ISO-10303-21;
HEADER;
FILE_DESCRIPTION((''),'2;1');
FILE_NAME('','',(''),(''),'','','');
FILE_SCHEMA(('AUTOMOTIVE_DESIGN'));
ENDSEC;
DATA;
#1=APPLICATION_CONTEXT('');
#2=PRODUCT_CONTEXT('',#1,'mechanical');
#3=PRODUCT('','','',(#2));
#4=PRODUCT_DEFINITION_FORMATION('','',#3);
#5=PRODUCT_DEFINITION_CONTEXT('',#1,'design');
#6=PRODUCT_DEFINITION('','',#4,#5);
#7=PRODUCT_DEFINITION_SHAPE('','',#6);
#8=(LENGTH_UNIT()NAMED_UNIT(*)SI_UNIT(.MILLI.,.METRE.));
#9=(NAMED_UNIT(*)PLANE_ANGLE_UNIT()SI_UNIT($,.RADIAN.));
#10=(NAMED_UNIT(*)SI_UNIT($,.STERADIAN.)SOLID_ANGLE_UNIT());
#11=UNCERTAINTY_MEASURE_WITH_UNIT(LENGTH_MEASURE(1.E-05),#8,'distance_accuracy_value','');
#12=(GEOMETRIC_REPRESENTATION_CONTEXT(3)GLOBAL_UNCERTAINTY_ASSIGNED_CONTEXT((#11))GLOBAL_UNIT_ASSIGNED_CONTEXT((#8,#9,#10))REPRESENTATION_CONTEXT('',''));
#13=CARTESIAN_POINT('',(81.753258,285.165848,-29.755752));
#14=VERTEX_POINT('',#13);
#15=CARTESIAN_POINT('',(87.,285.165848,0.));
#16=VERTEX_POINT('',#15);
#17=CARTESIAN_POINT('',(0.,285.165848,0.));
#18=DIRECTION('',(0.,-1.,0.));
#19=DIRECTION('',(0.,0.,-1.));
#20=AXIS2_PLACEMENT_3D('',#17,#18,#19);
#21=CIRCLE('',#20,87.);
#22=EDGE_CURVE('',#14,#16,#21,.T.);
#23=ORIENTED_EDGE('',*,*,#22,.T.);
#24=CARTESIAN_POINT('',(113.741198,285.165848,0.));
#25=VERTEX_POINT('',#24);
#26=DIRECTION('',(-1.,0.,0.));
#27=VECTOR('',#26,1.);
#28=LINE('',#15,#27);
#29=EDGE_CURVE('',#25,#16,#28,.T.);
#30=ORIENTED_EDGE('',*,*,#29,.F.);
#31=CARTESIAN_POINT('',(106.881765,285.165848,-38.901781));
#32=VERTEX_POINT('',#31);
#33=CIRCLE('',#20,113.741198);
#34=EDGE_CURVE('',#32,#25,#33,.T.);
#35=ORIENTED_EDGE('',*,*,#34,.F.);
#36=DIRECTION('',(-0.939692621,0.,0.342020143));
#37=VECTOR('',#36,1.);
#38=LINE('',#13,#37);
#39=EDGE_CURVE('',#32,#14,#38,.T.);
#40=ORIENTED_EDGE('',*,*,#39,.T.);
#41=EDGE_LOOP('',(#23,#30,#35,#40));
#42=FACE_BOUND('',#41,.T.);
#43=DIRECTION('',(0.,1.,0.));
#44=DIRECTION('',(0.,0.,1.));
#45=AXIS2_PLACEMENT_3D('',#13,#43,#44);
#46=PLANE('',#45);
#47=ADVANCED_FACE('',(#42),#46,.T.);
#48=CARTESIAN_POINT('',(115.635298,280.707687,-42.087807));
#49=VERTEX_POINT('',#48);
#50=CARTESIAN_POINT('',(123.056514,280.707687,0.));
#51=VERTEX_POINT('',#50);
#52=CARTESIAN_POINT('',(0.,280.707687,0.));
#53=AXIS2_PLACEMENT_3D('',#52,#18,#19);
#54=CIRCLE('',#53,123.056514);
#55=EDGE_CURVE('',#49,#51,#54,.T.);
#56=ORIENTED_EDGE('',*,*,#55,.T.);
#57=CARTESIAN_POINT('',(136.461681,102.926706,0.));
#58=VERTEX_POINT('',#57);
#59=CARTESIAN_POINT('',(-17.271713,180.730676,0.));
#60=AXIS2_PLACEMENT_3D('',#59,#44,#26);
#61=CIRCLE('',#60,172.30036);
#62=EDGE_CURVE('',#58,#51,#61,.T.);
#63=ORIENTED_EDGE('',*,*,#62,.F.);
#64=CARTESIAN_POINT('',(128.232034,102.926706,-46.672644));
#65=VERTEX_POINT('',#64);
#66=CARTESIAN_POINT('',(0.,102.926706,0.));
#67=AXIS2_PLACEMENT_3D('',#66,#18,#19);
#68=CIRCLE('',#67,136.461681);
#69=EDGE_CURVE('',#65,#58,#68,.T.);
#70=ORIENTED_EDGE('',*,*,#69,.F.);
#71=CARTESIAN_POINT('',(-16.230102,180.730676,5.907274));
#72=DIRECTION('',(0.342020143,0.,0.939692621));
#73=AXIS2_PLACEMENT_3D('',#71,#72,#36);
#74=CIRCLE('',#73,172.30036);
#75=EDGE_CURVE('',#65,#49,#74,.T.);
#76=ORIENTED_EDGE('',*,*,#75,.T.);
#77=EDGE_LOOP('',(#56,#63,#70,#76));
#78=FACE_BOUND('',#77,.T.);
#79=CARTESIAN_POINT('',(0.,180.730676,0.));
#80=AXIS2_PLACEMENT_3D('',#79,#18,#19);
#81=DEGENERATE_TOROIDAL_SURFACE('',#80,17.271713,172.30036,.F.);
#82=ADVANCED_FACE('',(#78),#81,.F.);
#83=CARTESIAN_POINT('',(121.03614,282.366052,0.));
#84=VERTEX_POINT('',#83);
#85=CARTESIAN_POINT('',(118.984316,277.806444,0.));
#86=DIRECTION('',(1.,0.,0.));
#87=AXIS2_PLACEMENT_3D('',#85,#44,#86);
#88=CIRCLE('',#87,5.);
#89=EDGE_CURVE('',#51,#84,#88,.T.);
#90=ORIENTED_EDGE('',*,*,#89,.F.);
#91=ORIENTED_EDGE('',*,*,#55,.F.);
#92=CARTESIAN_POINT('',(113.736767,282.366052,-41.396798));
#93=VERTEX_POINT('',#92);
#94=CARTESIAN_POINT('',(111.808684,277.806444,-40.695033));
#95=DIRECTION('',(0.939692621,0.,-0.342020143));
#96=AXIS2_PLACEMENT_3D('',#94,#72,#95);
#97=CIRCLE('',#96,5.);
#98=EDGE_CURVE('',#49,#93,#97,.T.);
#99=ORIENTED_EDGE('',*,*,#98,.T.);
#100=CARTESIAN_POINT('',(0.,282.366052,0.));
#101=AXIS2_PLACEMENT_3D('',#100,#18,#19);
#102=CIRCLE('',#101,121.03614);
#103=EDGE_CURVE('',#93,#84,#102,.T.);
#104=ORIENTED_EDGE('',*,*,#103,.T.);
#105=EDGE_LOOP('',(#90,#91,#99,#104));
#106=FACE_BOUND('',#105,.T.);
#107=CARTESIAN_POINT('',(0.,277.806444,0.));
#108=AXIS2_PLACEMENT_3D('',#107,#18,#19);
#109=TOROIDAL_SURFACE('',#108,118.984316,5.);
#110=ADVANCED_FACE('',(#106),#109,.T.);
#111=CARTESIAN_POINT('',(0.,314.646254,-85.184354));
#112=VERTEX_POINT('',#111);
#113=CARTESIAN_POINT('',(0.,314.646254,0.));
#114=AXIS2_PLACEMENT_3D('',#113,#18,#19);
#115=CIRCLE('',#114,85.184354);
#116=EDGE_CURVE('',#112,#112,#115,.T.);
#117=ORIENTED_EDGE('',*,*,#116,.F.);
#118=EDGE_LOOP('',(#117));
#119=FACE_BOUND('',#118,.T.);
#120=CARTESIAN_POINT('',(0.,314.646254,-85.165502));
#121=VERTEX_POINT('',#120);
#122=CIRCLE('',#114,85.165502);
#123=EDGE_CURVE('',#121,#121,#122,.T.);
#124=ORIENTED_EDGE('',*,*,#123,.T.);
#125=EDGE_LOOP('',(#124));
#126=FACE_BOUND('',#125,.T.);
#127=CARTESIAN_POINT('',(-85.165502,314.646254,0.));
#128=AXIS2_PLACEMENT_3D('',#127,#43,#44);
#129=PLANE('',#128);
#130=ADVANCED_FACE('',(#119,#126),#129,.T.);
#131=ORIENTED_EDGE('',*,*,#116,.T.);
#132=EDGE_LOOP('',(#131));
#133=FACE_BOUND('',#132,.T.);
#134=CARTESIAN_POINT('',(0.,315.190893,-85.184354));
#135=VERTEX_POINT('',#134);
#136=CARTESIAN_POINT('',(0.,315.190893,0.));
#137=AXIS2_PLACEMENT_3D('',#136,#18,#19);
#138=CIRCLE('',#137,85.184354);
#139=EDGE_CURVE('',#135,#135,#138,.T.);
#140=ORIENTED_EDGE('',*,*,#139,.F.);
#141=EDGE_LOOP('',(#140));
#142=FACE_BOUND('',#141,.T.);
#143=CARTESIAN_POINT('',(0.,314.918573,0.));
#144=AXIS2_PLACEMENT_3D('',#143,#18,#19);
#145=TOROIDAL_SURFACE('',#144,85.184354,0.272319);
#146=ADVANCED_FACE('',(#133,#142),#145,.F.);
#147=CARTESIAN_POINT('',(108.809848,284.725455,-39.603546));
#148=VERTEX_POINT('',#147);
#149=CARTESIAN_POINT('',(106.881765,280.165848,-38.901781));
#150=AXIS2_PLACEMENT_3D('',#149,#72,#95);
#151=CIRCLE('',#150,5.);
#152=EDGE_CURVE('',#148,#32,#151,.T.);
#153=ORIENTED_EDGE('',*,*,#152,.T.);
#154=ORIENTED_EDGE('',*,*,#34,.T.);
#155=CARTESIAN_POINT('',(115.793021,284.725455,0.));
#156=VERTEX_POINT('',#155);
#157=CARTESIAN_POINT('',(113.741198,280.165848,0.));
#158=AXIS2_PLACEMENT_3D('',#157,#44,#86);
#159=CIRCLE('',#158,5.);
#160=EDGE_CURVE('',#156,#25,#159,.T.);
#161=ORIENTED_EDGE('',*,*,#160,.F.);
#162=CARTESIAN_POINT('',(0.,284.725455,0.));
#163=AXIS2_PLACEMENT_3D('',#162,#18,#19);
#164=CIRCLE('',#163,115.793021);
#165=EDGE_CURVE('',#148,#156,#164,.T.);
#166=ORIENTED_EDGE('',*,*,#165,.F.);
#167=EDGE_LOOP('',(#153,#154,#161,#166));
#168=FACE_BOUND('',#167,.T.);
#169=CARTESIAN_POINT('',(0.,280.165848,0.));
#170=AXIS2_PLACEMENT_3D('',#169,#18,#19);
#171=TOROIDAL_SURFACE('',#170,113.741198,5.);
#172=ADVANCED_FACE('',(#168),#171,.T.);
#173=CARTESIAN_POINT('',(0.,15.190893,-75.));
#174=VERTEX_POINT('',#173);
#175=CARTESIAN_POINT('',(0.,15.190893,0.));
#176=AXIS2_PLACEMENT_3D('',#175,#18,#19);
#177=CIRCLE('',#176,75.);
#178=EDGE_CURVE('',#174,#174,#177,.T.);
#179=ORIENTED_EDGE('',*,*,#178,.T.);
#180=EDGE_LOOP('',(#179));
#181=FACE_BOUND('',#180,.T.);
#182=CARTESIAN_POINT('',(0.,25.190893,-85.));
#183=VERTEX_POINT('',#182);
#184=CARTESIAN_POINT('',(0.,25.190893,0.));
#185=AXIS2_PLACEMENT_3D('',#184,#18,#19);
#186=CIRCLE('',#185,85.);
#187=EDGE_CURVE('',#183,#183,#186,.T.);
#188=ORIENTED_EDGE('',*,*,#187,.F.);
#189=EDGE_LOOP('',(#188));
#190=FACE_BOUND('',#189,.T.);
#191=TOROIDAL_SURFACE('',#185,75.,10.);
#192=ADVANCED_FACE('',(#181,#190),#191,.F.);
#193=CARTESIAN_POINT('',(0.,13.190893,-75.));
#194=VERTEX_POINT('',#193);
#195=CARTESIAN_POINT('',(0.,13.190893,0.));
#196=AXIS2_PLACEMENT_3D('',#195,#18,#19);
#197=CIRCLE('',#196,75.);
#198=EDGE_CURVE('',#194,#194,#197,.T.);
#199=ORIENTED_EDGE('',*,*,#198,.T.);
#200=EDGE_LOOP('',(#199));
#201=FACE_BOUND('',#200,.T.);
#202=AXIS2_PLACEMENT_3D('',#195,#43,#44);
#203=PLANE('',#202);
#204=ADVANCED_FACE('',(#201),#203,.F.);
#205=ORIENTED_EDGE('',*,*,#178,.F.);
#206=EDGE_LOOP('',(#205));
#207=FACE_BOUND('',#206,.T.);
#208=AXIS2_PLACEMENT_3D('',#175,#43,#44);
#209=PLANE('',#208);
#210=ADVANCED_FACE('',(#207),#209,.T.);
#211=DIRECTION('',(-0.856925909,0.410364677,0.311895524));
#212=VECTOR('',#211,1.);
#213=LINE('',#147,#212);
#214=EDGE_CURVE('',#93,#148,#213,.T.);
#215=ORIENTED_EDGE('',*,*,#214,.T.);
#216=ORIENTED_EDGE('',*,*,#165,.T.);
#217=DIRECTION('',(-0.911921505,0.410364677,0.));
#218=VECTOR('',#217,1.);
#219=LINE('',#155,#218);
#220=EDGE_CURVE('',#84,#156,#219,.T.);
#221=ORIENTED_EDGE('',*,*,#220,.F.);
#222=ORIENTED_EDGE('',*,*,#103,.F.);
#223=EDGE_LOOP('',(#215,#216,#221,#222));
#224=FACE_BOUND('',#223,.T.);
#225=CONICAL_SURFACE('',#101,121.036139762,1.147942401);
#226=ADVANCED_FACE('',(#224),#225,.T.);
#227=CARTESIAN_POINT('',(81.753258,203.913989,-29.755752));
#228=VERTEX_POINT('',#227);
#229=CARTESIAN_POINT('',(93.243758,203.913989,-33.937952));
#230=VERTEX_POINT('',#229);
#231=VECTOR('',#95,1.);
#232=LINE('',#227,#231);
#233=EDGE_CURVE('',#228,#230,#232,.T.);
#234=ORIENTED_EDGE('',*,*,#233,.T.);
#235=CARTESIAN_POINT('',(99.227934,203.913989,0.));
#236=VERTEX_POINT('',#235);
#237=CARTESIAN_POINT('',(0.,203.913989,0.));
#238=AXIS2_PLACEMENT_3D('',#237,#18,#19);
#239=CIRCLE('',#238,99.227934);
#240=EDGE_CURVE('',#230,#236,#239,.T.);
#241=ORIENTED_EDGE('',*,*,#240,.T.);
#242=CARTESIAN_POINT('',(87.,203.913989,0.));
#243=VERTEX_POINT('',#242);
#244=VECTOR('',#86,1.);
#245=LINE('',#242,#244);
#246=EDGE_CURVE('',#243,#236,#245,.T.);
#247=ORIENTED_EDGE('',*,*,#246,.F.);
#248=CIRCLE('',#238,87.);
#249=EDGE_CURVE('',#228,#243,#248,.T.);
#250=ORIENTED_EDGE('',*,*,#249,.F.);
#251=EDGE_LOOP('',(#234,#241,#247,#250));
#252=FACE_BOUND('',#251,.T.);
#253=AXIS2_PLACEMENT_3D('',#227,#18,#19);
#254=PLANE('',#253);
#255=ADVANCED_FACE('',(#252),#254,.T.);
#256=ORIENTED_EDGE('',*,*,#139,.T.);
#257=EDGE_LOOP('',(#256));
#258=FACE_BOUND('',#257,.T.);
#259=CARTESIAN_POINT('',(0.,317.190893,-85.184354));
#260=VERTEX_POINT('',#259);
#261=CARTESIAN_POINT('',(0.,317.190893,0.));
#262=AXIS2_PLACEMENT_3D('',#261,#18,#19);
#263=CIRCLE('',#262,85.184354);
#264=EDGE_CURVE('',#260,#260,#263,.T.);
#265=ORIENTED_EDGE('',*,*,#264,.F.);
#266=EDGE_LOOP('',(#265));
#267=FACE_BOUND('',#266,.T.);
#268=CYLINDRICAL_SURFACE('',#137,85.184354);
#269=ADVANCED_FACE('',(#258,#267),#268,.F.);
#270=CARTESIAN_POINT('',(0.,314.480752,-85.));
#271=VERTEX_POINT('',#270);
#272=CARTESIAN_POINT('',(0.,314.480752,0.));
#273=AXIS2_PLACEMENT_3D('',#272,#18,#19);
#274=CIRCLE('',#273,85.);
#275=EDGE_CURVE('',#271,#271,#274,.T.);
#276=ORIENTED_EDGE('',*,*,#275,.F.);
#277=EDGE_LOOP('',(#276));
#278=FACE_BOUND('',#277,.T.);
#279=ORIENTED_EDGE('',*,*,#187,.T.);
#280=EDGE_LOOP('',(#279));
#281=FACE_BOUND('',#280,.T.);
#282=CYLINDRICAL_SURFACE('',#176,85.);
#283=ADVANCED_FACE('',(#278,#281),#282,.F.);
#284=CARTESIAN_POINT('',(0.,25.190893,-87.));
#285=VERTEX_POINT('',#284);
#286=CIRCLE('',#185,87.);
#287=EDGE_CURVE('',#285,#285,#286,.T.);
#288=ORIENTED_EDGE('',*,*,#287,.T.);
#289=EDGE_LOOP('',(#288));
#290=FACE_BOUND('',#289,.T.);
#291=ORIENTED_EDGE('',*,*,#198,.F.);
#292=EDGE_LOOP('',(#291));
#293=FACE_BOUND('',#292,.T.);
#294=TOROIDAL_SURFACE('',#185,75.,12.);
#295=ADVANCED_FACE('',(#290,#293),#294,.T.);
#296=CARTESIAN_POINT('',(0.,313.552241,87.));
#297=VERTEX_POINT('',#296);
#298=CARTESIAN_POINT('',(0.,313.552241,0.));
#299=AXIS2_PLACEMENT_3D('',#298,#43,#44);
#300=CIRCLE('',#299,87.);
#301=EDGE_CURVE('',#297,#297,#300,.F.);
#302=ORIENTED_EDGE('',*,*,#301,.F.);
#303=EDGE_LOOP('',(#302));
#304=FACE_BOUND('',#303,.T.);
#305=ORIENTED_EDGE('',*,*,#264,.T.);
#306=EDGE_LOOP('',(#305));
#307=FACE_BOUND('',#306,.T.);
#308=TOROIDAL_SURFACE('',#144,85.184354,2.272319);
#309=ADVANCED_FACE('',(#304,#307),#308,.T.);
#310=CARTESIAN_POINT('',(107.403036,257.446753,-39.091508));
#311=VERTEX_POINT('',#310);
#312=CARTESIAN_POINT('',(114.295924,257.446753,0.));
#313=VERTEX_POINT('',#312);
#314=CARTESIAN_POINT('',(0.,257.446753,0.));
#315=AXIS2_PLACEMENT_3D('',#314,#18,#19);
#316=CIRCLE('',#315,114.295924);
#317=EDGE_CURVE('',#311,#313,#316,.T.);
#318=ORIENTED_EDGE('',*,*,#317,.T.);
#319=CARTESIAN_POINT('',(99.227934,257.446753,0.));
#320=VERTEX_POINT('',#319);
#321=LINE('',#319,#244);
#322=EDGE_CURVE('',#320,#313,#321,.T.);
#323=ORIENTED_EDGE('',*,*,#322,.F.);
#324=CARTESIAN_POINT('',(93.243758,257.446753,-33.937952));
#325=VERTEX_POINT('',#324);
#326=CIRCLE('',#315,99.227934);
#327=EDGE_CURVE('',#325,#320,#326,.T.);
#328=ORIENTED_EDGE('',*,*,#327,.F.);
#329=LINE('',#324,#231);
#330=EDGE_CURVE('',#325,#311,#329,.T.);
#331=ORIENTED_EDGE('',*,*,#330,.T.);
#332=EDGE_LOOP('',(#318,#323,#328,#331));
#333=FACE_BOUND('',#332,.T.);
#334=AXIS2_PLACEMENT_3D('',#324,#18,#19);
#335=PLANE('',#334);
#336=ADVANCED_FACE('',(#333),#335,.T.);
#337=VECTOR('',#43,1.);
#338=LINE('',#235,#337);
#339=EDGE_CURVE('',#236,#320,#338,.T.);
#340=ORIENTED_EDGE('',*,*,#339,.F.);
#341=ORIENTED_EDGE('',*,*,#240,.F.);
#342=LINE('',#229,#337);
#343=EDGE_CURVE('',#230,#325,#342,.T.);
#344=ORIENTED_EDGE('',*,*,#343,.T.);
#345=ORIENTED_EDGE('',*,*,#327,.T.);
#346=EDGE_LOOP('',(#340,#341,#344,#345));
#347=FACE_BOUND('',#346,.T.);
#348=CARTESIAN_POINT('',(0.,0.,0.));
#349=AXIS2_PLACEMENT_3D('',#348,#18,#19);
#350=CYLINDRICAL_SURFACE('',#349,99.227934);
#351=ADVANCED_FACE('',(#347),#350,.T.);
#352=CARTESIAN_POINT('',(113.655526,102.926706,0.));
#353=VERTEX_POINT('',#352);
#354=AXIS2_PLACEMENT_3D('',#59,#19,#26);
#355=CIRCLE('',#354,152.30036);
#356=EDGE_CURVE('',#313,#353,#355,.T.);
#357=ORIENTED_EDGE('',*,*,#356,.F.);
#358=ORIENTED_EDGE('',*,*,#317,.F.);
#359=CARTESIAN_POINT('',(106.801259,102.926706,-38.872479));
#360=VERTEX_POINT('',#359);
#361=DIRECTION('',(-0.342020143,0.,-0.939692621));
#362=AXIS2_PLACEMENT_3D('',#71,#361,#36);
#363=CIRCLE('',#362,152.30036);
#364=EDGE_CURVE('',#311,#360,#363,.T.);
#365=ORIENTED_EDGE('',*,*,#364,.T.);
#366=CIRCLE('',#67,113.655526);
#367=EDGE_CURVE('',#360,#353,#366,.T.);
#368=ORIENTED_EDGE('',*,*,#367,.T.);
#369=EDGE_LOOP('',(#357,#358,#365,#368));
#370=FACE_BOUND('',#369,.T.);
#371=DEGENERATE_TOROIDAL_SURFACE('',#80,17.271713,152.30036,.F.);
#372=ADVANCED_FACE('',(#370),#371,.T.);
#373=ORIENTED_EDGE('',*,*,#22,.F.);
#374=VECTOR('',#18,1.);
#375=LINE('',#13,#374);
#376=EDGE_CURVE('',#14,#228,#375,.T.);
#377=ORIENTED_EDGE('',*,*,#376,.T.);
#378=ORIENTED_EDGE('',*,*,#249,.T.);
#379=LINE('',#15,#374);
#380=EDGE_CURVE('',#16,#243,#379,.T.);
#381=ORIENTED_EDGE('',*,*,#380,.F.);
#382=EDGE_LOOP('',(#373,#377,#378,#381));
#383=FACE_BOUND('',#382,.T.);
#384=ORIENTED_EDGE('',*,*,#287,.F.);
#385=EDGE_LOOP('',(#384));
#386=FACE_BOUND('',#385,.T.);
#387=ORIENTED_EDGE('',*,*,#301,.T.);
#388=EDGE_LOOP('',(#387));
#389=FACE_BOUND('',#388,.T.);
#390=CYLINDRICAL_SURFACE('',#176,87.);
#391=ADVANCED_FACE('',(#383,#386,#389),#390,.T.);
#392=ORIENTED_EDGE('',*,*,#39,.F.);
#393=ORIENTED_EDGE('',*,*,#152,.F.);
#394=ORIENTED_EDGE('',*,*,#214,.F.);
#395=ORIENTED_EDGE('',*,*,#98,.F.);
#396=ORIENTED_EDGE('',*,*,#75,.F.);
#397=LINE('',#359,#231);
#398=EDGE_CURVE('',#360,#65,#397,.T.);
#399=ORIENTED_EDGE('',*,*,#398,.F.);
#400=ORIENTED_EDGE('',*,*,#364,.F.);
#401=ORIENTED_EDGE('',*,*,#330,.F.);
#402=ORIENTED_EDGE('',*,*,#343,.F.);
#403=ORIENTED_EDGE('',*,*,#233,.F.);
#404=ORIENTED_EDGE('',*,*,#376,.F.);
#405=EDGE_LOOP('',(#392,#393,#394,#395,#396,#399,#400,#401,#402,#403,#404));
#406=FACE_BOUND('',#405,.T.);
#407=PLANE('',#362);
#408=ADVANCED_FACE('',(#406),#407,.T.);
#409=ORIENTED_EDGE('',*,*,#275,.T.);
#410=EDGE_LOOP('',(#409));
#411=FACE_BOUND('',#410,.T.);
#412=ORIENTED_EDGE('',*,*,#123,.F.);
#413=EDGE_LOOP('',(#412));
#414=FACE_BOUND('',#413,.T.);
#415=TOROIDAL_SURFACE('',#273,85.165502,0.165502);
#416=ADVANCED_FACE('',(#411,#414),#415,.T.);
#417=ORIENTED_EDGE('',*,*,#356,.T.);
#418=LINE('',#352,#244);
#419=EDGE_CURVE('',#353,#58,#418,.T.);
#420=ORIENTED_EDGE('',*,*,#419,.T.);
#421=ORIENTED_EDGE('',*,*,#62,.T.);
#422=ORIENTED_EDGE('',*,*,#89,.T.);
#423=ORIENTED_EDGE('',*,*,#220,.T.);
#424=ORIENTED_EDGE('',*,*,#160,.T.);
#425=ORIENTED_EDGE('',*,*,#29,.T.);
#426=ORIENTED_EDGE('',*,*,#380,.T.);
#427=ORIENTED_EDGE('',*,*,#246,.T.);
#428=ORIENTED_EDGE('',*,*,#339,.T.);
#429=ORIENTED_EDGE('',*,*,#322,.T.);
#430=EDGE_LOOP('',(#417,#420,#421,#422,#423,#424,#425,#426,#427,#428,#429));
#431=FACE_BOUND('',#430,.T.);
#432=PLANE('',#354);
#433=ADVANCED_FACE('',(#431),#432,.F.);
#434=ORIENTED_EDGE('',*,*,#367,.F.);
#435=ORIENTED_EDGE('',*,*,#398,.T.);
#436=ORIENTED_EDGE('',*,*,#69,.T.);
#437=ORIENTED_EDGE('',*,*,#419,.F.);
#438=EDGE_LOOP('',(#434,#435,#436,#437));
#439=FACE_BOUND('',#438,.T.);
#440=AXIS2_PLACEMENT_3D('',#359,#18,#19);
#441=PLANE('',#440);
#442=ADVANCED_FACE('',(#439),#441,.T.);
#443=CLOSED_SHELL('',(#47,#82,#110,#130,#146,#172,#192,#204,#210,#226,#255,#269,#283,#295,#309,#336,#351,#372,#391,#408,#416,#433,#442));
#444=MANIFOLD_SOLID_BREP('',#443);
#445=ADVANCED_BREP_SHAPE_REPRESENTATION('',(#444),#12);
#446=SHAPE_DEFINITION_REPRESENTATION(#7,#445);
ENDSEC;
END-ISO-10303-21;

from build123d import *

# Parameters (mm, degrees)
REVOLVE2_ANGLE = 20


with BuildPart() as part:
    # Sketch1 → Revolve1 (revolve)
    with BuildSketch(Plane.XY, mode=Mode.PRIVATE) as revolve1_sk:
        with BuildLine():
            Line((0, 15.190892732), (-75, 15.190892732))
            ThreePointArc((-75, 15.190892732), (-82.071067812, 18.11982492), (-85, 25.190892732))
            Line((-85, 25.190892732), (-85, 314.480751979))
            ThreePointArc((-85, 314.480751979), (-85.048474494, 314.597779759), (-85.165502274, 314.646254252))
            Line((-85.165502274, 314.646254252), (-85.184354085, 314.646254252))
            ThreePointArc((-85.184354085, 314.646254252), (-85.456673325, 314.918573492), (-85.184354085, 315.190892732))
            Line((-85.184354085, 315.190892732), (0, 315.190892732))
            Line((0, 315.190892732), (0, 15.190892732))
        make_face()
    revolve(revolve1_sk.sketch.rotate(Axis((0, 15.190892732, 0), (0, 1, 0)), 270), axis=Axis((0, 15.190892732, 0), (0, 1, 0)))

    # Shell7: read off the stored shape, not the designer's step
    # Shell7 outline → Shell7 (revolve, cut)
    with BuildSketch(Plane.XY):
        with BuildLine():
            Line((85.184354085, 18.844324221), (85.184354085, 315.190892732))
            Line((85.184354085, 315.190892732), (0, 315.190892732))
            Line((0, 315.190892732), (0, 13.190892732))
            Line((0, 13.190892732), (75, 13.190892732))
            ThreePointArc((75, 13.190892732), (80.824138471, 14.699019159), (85.184354085, 18.844324221))
        make_face()
    revolve(axis=Axis((0, 0, 0), (0, 1, 0)), mode=Mode.SUBTRACT)

    # Shell7 2 outline → Shell7 2 (revolve)
    with BuildSketch(Plane.XY):
        with BuildLine():
            Line((85.184354085, 317.190892732), (85.184354085, 18.844324221))
            ThreePointArc((85.184354085, 18.844324221), (86.537162758, 21.890305589), (87, 25.190892732))
            Line((87, 25.190892732), (87, 313.552240941))
            ThreePointArc((87, 313.552240941), (87.21760007, 315.933140145), (85.184354085, 317.190892732))
        make_face()
    revolve(axis=Axis((0, 0, 0), (0, 1, 0)))

    # Shell7 3 outline → Shell7 3 (revolve, cut)
    with BuildSketch(Plane.XY):
        with BuildLine():
            Line((85.184354085, 315.190892732), (85.184354085, 314.646254252))
            ThreePointArc((85.184354085, 314.646254252), (85.456673325, 314.918573492), (85.184354085, 315.190892732))
        make_face()
    revolve(axis=Axis((0, 0, 0), (0, 1, 0)), mode=Mode.SUBTRACT)

    # Shell7 4 outline → Shell7 4 (revolve)
    with BuildSketch(Plane.XY):
        with BuildLine():
            Line((85.184354085, 18.844324221), (85.184354085, 314.646254252))
            Line((85.184354085, 314.646254252), (85.165502274, 314.646254252))
            ThreePointArc((85.165502274, 314.646254252), (85.048474494, 314.597779759), (85, 314.480751979))
            Line((85, 314.480751979), (85, 25.190892732))
            ThreePointArc((85, 25.190892732), (82.071067812, 18.11982492), (75, 15.190892732))
            Line((75, 15.190892732), (0, 15.190892732))
            Line((0, 15.190892732), (0, 13.190892732))
            Line((0, 13.190892732), (75, 13.190892732))
            ThreePointArc((75, 13.190892732), (80.824138471, 14.699019159), (85.184354085, 18.844324221))
        make_face()
    revolve(axis=Axis((0, 0, 0), (0, 1, 0)))

    # Sketch4 → Revolve2 (revolve)
    with BuildSketch(Plane.XY):
        with BuildLine():
            Line((87, 285.165847721), (113.741198075, 285.165847721))
            ThreePointArc((113.741198075, 285.165847721), (114.79047458, 285.054509994), (115.793021461, 284.725455247))
            Line((115.793021461, 284.725455247), (121.036139762, 282.366052012))
            ThreePointArc((121.036139762, 282.366052012), (122.156610921, 281.671227445), (123.056514115, 280.707686559))
            ThreePointArc((123.056514115, 280.707686559), (154.540912997, 193.685812088), (136.46168064, 102.926705841))
            Line((136.46168064, 102.926705841), (113.655526061, 102.926705841))
            ThreePointArc((113.655526061, 102.926705841), (135.027338912, 180.099482709), (114.295923717, 257.446753496))
            Line((114.295923717, 257.446753496), (99.227934217, 257.446753496))
            Line((99.227934217, 257.446753496), (99.227934217, 203.913989012))
            Line((99.227934217, 203.913989012), (87, 203.913989012))
            Line((87, 203.913989012), (87, 285.165847721))
        make_face()
    revolve(axis=Axis((0, 0, 0), (0, 1, 0)), revolution_arc=REVOLVE2_ANGLE)


solid = part.part
